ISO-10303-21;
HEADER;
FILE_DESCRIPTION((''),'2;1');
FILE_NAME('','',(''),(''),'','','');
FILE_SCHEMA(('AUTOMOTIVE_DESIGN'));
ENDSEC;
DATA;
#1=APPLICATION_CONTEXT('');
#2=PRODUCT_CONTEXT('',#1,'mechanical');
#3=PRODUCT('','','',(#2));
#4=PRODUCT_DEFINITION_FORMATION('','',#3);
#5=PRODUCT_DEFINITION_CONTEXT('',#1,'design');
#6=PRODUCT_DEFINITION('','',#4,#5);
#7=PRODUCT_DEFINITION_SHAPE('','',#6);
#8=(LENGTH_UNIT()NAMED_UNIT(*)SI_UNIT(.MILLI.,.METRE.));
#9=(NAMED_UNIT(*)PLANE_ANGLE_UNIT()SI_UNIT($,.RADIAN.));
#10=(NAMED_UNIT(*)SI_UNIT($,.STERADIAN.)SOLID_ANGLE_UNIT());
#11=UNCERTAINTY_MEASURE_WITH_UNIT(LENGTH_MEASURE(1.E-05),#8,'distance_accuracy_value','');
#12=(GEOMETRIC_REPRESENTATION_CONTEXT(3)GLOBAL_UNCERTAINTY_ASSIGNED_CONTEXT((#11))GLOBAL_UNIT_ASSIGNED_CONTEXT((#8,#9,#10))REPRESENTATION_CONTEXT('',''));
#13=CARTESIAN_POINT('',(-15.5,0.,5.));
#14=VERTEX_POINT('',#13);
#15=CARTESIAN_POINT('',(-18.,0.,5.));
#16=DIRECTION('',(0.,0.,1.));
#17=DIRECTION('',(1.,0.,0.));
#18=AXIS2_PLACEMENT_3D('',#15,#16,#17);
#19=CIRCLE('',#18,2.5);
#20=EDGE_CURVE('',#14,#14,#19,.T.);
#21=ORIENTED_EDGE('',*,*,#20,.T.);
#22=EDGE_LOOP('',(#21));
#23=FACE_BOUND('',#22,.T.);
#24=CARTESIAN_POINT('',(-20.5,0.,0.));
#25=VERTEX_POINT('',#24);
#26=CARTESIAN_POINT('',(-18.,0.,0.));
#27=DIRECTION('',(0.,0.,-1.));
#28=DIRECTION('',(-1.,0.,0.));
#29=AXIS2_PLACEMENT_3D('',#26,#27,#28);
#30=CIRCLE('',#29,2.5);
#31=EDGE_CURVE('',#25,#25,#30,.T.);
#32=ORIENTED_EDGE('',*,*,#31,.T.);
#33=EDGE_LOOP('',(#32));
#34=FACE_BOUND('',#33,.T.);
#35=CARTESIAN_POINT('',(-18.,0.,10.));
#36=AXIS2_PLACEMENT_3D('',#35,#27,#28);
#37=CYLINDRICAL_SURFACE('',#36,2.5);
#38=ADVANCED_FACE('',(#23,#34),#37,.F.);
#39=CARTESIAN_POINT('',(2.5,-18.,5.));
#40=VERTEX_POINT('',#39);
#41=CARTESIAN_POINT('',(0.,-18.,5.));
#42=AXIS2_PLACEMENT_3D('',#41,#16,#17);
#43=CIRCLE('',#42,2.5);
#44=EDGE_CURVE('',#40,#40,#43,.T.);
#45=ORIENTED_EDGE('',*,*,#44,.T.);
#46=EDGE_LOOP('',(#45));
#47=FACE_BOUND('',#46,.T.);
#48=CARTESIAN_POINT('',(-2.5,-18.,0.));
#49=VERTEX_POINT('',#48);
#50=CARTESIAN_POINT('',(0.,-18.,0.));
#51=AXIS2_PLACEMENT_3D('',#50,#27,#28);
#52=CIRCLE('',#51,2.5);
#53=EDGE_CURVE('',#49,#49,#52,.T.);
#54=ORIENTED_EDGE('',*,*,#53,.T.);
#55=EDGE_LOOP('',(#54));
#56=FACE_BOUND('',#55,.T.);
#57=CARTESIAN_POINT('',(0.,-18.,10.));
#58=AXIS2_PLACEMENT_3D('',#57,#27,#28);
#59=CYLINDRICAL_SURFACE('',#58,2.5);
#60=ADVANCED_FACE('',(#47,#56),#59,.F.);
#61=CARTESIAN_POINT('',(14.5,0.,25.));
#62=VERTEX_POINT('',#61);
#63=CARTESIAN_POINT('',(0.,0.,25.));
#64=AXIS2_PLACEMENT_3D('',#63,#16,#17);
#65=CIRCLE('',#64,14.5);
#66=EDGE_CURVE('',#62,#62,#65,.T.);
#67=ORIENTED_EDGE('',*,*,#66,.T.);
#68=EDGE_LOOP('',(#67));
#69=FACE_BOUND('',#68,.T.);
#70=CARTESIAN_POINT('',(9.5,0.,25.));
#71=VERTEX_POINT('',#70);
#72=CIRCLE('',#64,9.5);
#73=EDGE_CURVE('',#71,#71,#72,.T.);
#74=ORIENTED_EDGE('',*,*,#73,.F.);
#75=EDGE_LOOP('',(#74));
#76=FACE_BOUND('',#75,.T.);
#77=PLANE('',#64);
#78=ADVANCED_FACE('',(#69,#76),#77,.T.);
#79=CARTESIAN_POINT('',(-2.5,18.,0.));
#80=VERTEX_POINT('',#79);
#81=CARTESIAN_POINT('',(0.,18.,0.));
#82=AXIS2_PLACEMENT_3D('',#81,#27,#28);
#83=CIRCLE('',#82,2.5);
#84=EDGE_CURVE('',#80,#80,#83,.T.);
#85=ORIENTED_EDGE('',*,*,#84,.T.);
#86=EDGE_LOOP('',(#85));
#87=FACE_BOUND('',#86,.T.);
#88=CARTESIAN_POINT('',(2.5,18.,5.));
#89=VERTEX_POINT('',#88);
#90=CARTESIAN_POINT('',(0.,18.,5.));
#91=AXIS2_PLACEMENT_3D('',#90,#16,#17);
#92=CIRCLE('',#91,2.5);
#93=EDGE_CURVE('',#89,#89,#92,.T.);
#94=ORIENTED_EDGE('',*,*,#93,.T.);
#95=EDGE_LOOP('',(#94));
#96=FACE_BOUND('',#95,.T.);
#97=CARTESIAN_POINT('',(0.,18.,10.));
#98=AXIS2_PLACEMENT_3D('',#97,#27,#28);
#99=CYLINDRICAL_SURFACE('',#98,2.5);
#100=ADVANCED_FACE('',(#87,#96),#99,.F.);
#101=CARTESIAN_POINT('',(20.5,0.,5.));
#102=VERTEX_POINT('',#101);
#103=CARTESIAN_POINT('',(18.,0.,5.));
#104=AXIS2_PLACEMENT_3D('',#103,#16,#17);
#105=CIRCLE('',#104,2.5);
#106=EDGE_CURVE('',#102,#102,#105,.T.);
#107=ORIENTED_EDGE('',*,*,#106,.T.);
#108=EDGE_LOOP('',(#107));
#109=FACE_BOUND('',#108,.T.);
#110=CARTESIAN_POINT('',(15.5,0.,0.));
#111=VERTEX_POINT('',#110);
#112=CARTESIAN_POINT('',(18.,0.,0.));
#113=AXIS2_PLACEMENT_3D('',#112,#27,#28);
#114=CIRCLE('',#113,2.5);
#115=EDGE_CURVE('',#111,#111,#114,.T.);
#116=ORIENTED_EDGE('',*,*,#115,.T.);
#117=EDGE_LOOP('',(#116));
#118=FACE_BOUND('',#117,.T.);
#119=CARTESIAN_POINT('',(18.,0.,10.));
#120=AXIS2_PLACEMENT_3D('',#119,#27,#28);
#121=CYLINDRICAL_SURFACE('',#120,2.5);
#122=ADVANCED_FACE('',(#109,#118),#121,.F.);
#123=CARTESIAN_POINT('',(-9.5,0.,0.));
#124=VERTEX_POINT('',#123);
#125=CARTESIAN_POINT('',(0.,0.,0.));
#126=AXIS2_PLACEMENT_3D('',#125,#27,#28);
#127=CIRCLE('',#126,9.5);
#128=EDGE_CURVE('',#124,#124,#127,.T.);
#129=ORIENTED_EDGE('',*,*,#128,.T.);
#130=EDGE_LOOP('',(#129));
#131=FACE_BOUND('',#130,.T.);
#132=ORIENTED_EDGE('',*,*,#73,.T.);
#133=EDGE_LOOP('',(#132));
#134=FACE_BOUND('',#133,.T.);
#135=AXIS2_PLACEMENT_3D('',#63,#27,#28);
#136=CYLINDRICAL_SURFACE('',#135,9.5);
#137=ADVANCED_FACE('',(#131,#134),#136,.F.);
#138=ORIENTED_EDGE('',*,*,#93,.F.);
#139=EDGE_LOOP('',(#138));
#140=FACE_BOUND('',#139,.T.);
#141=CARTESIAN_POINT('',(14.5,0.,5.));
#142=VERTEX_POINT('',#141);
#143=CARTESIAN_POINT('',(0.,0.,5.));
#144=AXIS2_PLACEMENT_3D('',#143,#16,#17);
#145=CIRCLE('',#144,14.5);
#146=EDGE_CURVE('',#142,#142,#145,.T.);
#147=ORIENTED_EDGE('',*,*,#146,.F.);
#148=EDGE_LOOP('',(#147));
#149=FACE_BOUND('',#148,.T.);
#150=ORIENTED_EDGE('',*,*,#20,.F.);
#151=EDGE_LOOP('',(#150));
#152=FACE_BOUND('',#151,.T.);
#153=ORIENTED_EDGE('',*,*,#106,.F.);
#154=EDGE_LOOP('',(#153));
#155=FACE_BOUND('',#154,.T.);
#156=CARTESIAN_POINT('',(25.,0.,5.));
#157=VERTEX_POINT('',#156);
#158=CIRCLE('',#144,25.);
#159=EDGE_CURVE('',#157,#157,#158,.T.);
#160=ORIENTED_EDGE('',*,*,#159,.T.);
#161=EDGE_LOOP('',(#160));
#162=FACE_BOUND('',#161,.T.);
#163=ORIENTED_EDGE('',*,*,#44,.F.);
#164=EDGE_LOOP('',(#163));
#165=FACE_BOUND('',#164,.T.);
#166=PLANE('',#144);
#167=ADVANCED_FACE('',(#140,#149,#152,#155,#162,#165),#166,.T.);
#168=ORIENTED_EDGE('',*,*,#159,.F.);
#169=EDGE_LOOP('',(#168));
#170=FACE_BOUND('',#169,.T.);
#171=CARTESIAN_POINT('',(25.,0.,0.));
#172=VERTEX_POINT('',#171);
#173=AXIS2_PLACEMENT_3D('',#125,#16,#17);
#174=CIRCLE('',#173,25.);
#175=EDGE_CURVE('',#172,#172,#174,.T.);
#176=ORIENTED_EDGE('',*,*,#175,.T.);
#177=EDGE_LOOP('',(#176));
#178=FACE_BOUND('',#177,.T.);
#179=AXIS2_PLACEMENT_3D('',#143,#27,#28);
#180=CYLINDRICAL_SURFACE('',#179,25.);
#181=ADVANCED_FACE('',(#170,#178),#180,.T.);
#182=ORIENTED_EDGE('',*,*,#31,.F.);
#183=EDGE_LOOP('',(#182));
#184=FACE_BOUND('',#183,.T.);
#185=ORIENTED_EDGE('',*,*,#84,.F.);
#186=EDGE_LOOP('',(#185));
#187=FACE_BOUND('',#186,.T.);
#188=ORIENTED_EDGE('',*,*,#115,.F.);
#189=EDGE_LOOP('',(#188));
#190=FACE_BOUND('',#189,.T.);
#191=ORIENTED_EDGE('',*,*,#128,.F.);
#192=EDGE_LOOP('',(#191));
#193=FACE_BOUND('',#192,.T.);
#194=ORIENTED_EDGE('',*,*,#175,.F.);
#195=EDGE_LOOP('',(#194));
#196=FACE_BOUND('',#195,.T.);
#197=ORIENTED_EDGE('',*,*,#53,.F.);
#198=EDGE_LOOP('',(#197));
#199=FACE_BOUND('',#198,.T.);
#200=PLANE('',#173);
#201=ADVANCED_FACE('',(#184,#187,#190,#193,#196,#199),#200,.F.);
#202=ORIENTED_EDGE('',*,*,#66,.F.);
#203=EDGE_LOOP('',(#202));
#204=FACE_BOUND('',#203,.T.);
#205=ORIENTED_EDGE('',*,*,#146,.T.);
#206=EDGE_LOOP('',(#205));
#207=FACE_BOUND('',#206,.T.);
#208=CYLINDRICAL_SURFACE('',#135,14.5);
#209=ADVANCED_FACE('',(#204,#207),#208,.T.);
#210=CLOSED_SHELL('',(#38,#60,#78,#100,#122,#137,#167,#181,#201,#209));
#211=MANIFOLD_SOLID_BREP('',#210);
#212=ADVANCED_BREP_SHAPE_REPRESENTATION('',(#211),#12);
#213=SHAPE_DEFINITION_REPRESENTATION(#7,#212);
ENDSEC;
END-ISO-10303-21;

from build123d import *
from build123d.topology import SkipClean

# Parameters (mm, degrees)
SKETCH1_R           = 25
BOSS_EXTRUDE1_DEPTH = 5
SKETCH2_R           = 14.5
SKETCH2_R_2         = 9.5
BOSS_EXTRUDE2_DEPTH = 20
SKETCH3_R           = 9.5
CUT_EXTRUDE1_DEPTH  = 15
SKETCH4_R           = 2.5
CUT_EXTRUDE2_DEPTH  = 10


with BuildPart() as part:
    # Sketch1 → Boss-Extrude1 (new body)
    with BuildSketch(Plane.XY):
        Circle(SKETCH1_R)
    extrude(amount=BOSS_EXTRUDE1_DEPTH)

    # Sketch2 → Boss-Extrude2 (add)
    with BuildSketch(Plane.XY.offset(5)):
        Circle(SKETCH2_R)
        Circle(SKETCH2_R_2, mode=Mode.SUBTRACT)
    extrude(amount=BOSS_EXTRUDE2_DEPTH)

    # Sketch3 → Cut-Extrude1 (cut)
    with SkipClean():  # the faces are left unmerged after this step: merging them gives an invalid solid
        with BuildSketch(Plane(origin=(0, 0, 0), x_dir=(-1, 0, 0), z_dir=(0, 0, -1))):
            Circle(SKETCH3_R)
        extrude(amount=-CUT_EXTRUDE1_DEPTH, mode=Mode.SUBTRACT)
    add(part.part.scale(1), mode=Mode.REPLACE)  # the faces are merged on a copy

    # Sketch4 → Cut-Extrude2 (cut)
    with BuildSketch(Plane(origin=(0, 0, 0), x_dir=(-1, 0, 0), z_dir=(0, 0, -1))):
        with Locations((0, 18)):
            Circle(SKETCH4_R)
        with Locations((18, 0)):
            Circle(SKETCH4_R)
        with Locations((0, -18)):
            Circle(SKETCH4_R)
        with Locations((-18, 0)):
            Circle(SKETCH4_R)
    extrude(amount=-CUT_EXTRUDE2_DEPTH, mode=Mode.SUBTRACT)


solid = part.part
